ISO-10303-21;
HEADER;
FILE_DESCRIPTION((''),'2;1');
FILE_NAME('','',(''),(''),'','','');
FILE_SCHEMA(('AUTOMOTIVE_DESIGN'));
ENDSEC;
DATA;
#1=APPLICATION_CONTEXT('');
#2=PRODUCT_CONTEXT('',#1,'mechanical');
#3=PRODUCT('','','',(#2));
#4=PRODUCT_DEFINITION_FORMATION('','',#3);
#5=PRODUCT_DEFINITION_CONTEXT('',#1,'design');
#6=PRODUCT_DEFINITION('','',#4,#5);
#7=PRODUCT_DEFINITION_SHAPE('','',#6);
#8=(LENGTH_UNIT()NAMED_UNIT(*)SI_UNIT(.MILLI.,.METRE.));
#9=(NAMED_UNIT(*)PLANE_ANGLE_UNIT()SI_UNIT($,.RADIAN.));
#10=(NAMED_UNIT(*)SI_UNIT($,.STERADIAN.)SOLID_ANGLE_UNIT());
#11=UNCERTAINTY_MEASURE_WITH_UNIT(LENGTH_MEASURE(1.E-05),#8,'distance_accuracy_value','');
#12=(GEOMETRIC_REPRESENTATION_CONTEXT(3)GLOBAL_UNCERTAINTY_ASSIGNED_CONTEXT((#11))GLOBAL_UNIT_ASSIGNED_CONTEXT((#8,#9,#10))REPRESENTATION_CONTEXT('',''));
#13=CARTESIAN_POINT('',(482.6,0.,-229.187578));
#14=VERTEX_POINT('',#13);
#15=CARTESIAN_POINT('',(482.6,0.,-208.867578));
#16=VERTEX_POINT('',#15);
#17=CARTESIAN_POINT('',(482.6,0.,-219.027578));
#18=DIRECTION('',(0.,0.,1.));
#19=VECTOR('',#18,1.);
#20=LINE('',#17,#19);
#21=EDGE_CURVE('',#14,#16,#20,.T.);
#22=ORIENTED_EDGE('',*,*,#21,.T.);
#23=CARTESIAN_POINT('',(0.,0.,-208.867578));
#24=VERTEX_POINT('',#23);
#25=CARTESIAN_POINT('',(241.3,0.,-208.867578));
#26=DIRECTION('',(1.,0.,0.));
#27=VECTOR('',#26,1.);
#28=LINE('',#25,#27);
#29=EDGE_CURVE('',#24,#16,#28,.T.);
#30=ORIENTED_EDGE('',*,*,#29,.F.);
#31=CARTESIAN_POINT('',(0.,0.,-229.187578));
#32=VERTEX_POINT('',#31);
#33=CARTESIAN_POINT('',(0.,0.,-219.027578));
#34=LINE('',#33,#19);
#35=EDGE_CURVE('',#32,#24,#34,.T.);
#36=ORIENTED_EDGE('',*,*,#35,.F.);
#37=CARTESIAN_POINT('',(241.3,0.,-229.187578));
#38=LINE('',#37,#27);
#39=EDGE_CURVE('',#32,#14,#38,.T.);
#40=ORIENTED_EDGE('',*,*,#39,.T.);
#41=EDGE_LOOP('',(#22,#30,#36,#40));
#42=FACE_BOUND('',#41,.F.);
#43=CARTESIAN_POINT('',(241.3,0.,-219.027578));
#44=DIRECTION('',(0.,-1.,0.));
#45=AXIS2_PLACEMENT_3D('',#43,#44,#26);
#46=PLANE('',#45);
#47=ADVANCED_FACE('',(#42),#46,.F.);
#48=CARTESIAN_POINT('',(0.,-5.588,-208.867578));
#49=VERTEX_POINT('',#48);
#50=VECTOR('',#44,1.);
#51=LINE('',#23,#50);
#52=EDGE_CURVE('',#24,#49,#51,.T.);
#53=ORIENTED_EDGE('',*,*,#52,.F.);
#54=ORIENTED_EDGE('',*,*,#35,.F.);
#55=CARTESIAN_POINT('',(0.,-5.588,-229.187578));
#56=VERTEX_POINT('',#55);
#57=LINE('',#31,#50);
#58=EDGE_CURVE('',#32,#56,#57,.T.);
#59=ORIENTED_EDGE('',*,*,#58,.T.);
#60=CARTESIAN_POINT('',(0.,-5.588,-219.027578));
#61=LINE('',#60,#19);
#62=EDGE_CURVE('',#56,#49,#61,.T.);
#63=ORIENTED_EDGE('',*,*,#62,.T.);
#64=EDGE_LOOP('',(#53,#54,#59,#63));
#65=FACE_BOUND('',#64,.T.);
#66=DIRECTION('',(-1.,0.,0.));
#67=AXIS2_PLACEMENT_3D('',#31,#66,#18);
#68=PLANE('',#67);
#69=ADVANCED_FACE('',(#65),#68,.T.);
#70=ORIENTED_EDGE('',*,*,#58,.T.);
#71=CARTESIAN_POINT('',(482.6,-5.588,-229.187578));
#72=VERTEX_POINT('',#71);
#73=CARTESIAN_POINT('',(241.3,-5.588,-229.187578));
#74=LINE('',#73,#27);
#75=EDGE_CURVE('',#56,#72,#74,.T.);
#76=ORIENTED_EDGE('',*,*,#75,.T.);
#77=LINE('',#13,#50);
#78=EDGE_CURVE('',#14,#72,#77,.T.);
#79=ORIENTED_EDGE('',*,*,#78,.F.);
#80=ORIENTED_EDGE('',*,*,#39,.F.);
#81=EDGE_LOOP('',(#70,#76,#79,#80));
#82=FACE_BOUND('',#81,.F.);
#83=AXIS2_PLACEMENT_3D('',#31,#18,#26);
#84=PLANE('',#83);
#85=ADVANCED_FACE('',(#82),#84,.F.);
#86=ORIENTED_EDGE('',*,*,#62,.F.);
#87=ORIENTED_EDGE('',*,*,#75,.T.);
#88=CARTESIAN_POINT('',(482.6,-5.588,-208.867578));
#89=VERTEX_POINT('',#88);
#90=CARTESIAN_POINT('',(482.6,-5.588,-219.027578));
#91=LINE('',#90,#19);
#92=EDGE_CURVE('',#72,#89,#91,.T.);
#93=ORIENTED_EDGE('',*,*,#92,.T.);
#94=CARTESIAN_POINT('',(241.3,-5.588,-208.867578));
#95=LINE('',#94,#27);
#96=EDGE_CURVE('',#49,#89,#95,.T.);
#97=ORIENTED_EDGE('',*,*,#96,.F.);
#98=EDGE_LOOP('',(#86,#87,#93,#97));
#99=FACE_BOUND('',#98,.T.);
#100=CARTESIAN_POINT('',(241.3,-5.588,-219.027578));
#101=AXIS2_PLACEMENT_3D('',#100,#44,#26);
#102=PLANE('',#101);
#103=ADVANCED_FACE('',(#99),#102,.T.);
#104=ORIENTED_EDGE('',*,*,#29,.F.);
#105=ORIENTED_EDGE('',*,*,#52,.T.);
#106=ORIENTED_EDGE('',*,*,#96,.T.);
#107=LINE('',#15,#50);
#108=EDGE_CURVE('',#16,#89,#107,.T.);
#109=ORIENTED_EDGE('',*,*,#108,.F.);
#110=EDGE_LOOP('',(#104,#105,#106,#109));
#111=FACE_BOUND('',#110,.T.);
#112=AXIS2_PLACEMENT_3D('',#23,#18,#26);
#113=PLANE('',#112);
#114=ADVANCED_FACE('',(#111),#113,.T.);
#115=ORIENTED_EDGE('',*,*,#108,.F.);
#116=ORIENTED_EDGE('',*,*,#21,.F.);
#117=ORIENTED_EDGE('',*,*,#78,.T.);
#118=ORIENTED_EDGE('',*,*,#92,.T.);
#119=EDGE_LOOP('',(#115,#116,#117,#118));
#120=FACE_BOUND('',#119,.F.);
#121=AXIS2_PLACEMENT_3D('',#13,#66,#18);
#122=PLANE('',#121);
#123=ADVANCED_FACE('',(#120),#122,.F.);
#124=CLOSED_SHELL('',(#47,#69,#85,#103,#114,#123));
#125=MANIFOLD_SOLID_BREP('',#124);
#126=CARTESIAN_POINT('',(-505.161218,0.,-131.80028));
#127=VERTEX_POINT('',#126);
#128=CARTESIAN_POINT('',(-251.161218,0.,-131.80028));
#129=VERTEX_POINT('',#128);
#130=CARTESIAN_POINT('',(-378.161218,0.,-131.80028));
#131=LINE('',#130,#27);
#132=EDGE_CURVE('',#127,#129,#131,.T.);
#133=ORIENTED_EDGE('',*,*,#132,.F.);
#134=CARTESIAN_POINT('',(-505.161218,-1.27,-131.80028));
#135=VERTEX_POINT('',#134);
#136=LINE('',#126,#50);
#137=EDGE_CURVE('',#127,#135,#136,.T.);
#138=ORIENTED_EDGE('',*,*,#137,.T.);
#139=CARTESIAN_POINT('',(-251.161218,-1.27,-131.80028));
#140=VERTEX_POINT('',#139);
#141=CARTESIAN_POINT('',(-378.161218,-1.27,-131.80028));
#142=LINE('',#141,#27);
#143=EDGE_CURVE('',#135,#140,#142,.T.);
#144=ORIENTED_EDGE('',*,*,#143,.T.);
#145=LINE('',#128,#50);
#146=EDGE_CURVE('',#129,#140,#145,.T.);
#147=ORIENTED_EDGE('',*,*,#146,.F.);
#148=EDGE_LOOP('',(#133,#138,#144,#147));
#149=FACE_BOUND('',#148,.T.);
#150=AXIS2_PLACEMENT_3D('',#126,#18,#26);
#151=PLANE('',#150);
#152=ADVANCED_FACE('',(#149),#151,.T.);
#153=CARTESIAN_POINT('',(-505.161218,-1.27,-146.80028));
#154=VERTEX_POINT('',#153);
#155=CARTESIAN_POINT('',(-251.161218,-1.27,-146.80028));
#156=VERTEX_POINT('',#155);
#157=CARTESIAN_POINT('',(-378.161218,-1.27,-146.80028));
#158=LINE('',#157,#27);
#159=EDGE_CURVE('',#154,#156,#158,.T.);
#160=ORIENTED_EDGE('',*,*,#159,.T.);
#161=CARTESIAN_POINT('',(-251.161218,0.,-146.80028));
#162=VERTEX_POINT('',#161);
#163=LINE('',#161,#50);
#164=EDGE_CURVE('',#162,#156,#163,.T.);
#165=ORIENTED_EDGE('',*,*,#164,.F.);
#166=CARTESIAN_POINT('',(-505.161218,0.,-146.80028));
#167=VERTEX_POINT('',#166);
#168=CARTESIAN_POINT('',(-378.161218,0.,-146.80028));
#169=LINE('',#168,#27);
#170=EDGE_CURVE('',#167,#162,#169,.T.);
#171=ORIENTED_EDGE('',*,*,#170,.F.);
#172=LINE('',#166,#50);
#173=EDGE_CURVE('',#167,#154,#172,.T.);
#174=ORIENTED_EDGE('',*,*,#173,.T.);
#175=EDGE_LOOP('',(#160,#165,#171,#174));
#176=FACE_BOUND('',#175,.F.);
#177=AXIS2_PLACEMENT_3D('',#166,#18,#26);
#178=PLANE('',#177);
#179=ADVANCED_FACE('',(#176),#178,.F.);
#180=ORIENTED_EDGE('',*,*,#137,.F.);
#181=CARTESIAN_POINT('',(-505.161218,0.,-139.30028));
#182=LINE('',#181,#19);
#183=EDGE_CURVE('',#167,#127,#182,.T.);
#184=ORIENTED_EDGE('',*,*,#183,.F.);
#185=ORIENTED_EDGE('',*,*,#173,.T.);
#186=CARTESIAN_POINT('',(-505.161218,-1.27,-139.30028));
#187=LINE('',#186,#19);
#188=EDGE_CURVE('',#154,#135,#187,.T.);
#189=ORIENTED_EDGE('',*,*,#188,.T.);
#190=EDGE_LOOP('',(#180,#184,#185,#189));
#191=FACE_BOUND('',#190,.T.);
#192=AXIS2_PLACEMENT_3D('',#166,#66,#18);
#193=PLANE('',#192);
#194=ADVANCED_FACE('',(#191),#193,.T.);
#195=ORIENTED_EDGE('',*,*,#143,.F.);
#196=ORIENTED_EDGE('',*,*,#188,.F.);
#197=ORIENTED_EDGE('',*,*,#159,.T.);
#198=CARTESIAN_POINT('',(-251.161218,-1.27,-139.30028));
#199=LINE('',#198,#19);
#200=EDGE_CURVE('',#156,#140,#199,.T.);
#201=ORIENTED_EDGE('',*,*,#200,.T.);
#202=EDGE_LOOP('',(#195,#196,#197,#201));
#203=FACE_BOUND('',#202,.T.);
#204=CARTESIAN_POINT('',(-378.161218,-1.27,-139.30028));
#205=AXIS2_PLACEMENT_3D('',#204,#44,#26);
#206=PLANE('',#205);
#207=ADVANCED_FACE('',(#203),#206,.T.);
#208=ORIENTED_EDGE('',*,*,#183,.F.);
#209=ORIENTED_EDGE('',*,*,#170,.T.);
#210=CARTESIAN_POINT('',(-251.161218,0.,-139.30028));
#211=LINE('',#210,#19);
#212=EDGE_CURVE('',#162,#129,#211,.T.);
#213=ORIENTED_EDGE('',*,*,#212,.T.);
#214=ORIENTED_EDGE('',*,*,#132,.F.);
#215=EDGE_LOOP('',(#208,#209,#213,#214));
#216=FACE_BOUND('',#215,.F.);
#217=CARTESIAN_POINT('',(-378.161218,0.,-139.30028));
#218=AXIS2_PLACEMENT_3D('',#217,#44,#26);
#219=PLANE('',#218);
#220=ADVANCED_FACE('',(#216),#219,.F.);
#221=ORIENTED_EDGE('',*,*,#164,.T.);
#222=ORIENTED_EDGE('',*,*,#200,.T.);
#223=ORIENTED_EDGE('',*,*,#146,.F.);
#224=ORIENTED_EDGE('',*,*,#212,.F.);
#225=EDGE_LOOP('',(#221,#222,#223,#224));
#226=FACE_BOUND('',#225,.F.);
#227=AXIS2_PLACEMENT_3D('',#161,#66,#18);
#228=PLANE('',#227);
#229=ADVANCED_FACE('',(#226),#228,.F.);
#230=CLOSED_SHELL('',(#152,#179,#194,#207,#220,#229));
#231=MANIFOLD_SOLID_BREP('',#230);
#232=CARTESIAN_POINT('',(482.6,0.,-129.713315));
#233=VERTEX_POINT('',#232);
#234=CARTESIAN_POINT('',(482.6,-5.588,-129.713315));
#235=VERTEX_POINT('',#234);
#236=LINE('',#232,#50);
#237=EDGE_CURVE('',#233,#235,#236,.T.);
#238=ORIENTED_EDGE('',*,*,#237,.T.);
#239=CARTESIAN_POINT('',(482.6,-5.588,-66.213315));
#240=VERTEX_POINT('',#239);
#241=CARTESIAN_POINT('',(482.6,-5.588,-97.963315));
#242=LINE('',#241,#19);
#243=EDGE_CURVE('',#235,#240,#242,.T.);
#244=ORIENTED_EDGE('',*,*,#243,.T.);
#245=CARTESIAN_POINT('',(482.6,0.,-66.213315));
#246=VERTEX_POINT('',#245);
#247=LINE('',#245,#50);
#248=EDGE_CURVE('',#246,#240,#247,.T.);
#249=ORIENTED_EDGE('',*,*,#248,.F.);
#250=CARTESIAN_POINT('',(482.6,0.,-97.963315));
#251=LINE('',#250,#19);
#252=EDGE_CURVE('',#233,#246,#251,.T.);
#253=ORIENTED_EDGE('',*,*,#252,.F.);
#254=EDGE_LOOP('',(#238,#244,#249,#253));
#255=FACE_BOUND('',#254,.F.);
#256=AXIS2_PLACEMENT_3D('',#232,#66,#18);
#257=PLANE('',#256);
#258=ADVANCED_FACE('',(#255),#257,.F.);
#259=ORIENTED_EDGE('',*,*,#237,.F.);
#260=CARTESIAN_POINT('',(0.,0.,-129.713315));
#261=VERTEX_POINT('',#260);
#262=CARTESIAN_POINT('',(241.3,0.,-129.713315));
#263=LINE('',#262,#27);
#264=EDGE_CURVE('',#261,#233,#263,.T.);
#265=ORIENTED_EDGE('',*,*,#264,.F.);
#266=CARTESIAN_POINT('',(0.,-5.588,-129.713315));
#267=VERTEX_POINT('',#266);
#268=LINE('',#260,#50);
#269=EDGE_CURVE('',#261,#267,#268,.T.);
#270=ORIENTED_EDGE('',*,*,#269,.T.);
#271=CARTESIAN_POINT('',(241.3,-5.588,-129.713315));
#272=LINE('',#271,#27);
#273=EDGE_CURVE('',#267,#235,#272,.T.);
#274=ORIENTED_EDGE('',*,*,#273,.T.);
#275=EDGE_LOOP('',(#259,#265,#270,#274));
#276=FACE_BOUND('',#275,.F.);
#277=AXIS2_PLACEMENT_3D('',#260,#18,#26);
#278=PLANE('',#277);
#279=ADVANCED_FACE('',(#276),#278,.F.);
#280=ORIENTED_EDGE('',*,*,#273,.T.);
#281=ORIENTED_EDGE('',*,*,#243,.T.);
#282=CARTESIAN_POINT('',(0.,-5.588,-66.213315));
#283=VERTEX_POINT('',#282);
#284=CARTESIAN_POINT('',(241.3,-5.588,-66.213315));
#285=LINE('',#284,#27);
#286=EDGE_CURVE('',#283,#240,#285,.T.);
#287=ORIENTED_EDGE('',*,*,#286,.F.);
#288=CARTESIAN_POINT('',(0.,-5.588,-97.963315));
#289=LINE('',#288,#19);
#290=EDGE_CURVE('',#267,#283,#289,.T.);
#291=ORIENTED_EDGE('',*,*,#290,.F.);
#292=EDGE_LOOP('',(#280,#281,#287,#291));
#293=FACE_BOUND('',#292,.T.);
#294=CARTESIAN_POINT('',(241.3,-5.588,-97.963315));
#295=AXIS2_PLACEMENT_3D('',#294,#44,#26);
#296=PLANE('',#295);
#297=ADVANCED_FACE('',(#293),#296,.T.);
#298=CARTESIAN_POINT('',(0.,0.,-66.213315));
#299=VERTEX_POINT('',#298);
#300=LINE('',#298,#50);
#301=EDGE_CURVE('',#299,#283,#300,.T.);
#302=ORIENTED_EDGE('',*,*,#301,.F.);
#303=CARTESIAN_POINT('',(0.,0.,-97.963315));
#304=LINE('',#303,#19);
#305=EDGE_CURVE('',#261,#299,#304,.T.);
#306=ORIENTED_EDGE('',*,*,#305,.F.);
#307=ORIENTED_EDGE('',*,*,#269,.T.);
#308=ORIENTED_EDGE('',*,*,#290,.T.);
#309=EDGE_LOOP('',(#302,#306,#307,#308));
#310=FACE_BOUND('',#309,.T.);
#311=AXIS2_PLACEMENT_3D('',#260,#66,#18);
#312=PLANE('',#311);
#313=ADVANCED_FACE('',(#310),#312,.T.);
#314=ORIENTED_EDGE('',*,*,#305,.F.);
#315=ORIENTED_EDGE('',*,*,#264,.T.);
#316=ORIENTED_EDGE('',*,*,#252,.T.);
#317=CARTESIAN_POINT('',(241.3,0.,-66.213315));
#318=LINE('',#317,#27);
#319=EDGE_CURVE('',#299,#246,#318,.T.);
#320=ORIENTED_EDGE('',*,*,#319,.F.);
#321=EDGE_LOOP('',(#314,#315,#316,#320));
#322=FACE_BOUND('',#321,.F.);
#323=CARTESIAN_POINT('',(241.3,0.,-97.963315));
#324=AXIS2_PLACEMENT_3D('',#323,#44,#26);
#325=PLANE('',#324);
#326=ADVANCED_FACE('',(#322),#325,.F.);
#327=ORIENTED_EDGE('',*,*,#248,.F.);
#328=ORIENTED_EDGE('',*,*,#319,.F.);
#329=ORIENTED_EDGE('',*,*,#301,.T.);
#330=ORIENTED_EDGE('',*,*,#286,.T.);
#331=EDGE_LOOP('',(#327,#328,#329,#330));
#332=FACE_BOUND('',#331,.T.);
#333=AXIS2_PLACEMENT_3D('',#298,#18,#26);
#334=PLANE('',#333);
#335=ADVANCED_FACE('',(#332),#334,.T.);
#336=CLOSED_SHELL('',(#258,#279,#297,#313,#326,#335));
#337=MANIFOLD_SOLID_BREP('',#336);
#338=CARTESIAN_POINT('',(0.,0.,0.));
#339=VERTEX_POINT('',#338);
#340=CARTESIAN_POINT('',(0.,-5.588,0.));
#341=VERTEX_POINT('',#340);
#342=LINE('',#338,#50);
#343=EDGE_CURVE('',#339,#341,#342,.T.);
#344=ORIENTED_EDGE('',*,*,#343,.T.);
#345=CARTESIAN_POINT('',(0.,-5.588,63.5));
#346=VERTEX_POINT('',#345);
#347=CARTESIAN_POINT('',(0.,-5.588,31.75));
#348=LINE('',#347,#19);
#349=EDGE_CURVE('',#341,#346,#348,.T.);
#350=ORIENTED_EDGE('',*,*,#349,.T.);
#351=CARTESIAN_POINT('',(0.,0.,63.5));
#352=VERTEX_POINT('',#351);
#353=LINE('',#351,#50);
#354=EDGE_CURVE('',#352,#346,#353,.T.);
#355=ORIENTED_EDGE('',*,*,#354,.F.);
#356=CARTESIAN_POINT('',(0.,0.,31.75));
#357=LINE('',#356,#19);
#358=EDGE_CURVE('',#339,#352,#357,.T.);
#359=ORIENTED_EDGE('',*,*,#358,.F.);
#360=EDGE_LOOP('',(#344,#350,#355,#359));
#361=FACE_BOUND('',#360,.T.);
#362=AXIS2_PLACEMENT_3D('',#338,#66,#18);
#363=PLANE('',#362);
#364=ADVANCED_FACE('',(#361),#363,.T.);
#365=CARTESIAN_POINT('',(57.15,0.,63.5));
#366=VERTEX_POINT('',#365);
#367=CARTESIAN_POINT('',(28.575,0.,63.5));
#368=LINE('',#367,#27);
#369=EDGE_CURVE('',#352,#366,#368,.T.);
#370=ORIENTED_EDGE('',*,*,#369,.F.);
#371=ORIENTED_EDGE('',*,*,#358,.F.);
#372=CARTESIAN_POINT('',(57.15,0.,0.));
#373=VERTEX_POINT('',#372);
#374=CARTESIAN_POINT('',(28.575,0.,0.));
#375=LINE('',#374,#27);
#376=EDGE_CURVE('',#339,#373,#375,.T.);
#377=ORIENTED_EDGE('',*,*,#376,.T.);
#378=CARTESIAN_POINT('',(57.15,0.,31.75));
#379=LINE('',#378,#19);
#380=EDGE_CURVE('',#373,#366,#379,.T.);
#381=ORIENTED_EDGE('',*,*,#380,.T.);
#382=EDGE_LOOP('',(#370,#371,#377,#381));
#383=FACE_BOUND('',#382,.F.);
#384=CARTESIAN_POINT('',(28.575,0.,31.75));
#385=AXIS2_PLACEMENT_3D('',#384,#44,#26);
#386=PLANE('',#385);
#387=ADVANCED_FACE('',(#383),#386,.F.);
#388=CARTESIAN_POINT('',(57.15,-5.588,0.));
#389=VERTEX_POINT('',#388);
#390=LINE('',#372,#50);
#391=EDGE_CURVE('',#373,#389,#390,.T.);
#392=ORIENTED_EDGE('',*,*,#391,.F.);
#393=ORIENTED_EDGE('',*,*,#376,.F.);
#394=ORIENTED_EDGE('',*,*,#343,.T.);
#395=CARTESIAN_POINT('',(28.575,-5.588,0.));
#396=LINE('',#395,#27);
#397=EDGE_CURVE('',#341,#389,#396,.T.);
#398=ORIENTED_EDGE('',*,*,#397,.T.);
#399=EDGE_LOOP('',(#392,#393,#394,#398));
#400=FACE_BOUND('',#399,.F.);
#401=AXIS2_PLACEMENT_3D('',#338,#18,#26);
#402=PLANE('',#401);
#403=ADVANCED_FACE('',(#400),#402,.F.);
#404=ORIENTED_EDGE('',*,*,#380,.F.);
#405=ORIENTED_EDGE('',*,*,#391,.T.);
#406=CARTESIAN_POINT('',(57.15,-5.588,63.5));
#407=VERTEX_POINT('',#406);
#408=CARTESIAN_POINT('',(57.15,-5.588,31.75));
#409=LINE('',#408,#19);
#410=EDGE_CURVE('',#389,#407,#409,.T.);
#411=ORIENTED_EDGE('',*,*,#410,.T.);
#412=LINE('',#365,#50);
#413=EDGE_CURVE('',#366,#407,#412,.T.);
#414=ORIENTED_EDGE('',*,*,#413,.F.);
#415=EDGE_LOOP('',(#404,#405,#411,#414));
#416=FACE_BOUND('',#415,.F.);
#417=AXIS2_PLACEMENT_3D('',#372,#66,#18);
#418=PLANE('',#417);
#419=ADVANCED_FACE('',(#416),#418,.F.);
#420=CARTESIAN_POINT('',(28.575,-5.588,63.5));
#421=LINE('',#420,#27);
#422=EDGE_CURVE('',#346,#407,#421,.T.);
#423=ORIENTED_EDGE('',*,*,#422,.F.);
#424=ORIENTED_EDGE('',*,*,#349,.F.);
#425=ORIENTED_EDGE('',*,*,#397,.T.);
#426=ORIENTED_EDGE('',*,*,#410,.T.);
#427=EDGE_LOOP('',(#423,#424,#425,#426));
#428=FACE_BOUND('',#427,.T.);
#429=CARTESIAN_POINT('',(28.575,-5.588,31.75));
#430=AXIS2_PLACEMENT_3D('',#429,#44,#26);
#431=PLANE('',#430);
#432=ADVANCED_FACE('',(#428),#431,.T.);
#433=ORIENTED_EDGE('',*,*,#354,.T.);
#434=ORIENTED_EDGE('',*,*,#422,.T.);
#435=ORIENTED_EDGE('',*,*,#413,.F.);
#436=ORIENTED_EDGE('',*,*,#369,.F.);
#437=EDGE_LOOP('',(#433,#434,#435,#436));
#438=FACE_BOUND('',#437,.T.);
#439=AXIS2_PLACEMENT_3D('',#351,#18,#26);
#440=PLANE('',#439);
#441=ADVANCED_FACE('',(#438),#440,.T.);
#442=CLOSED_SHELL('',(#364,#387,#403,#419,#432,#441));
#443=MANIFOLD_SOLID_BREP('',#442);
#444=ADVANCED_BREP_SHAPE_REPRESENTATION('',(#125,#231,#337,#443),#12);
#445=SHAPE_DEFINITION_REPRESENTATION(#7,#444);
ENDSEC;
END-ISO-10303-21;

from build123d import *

# Parameters (mm, degrees)
F0_W     = 57.15
F0_H     = 63.5
F1_DEPTH = 5.588
F0_W_2   = 482.6
F0_H_2   = 20.32
F2_W     = 254
F2_H     = 15
F3_DEPTH = 1.27


# Not quite as in the source:
# - a feature names something its author has since deleted; it is built from what else it names


with BuildPart() as f1:
    # F0 (on Front) → F1 (new body)
    with BuildSketch(Plane.XZ):
        with Locations((28.575, 31.75)):
            Rectangle(F0_W, F0_H)
    extrude(amount=F1_DEPTH)


with BuildPart() as f1b:
    # F0 (on Front) → F1, piece 2 (new body)
    with BuildSketch(Plane.XZ):
        with Locations((241.3, -97.9633150748)):
            Rectangle(F0_W_2, F0_H)
    extrude(amount=F1_DEPTH)


with BuildPart() as f1c:
    # F0 (on Front) → F1, piece 3 (new body)
    with BuildSketch(Plane.XZ):
        with Locations((241.3, -219.0275779629)):
            Rectangle(F0_W_2, F0_H_2)
    extrude(amount=F1_DEPTH)


with BuildPart() as f3:
    # F2 (on Front) → F3 (new body)
    with BuildSketch(Plane.XZ):
        with Locations((-378.1612176895, -139.3002796173)):
            Rectangle(F2_W, F2_H)
    extrude(amount=F3_DEPTH)


solid = Compound([f1.part, f1b.part, f1c.part, f3.part])
